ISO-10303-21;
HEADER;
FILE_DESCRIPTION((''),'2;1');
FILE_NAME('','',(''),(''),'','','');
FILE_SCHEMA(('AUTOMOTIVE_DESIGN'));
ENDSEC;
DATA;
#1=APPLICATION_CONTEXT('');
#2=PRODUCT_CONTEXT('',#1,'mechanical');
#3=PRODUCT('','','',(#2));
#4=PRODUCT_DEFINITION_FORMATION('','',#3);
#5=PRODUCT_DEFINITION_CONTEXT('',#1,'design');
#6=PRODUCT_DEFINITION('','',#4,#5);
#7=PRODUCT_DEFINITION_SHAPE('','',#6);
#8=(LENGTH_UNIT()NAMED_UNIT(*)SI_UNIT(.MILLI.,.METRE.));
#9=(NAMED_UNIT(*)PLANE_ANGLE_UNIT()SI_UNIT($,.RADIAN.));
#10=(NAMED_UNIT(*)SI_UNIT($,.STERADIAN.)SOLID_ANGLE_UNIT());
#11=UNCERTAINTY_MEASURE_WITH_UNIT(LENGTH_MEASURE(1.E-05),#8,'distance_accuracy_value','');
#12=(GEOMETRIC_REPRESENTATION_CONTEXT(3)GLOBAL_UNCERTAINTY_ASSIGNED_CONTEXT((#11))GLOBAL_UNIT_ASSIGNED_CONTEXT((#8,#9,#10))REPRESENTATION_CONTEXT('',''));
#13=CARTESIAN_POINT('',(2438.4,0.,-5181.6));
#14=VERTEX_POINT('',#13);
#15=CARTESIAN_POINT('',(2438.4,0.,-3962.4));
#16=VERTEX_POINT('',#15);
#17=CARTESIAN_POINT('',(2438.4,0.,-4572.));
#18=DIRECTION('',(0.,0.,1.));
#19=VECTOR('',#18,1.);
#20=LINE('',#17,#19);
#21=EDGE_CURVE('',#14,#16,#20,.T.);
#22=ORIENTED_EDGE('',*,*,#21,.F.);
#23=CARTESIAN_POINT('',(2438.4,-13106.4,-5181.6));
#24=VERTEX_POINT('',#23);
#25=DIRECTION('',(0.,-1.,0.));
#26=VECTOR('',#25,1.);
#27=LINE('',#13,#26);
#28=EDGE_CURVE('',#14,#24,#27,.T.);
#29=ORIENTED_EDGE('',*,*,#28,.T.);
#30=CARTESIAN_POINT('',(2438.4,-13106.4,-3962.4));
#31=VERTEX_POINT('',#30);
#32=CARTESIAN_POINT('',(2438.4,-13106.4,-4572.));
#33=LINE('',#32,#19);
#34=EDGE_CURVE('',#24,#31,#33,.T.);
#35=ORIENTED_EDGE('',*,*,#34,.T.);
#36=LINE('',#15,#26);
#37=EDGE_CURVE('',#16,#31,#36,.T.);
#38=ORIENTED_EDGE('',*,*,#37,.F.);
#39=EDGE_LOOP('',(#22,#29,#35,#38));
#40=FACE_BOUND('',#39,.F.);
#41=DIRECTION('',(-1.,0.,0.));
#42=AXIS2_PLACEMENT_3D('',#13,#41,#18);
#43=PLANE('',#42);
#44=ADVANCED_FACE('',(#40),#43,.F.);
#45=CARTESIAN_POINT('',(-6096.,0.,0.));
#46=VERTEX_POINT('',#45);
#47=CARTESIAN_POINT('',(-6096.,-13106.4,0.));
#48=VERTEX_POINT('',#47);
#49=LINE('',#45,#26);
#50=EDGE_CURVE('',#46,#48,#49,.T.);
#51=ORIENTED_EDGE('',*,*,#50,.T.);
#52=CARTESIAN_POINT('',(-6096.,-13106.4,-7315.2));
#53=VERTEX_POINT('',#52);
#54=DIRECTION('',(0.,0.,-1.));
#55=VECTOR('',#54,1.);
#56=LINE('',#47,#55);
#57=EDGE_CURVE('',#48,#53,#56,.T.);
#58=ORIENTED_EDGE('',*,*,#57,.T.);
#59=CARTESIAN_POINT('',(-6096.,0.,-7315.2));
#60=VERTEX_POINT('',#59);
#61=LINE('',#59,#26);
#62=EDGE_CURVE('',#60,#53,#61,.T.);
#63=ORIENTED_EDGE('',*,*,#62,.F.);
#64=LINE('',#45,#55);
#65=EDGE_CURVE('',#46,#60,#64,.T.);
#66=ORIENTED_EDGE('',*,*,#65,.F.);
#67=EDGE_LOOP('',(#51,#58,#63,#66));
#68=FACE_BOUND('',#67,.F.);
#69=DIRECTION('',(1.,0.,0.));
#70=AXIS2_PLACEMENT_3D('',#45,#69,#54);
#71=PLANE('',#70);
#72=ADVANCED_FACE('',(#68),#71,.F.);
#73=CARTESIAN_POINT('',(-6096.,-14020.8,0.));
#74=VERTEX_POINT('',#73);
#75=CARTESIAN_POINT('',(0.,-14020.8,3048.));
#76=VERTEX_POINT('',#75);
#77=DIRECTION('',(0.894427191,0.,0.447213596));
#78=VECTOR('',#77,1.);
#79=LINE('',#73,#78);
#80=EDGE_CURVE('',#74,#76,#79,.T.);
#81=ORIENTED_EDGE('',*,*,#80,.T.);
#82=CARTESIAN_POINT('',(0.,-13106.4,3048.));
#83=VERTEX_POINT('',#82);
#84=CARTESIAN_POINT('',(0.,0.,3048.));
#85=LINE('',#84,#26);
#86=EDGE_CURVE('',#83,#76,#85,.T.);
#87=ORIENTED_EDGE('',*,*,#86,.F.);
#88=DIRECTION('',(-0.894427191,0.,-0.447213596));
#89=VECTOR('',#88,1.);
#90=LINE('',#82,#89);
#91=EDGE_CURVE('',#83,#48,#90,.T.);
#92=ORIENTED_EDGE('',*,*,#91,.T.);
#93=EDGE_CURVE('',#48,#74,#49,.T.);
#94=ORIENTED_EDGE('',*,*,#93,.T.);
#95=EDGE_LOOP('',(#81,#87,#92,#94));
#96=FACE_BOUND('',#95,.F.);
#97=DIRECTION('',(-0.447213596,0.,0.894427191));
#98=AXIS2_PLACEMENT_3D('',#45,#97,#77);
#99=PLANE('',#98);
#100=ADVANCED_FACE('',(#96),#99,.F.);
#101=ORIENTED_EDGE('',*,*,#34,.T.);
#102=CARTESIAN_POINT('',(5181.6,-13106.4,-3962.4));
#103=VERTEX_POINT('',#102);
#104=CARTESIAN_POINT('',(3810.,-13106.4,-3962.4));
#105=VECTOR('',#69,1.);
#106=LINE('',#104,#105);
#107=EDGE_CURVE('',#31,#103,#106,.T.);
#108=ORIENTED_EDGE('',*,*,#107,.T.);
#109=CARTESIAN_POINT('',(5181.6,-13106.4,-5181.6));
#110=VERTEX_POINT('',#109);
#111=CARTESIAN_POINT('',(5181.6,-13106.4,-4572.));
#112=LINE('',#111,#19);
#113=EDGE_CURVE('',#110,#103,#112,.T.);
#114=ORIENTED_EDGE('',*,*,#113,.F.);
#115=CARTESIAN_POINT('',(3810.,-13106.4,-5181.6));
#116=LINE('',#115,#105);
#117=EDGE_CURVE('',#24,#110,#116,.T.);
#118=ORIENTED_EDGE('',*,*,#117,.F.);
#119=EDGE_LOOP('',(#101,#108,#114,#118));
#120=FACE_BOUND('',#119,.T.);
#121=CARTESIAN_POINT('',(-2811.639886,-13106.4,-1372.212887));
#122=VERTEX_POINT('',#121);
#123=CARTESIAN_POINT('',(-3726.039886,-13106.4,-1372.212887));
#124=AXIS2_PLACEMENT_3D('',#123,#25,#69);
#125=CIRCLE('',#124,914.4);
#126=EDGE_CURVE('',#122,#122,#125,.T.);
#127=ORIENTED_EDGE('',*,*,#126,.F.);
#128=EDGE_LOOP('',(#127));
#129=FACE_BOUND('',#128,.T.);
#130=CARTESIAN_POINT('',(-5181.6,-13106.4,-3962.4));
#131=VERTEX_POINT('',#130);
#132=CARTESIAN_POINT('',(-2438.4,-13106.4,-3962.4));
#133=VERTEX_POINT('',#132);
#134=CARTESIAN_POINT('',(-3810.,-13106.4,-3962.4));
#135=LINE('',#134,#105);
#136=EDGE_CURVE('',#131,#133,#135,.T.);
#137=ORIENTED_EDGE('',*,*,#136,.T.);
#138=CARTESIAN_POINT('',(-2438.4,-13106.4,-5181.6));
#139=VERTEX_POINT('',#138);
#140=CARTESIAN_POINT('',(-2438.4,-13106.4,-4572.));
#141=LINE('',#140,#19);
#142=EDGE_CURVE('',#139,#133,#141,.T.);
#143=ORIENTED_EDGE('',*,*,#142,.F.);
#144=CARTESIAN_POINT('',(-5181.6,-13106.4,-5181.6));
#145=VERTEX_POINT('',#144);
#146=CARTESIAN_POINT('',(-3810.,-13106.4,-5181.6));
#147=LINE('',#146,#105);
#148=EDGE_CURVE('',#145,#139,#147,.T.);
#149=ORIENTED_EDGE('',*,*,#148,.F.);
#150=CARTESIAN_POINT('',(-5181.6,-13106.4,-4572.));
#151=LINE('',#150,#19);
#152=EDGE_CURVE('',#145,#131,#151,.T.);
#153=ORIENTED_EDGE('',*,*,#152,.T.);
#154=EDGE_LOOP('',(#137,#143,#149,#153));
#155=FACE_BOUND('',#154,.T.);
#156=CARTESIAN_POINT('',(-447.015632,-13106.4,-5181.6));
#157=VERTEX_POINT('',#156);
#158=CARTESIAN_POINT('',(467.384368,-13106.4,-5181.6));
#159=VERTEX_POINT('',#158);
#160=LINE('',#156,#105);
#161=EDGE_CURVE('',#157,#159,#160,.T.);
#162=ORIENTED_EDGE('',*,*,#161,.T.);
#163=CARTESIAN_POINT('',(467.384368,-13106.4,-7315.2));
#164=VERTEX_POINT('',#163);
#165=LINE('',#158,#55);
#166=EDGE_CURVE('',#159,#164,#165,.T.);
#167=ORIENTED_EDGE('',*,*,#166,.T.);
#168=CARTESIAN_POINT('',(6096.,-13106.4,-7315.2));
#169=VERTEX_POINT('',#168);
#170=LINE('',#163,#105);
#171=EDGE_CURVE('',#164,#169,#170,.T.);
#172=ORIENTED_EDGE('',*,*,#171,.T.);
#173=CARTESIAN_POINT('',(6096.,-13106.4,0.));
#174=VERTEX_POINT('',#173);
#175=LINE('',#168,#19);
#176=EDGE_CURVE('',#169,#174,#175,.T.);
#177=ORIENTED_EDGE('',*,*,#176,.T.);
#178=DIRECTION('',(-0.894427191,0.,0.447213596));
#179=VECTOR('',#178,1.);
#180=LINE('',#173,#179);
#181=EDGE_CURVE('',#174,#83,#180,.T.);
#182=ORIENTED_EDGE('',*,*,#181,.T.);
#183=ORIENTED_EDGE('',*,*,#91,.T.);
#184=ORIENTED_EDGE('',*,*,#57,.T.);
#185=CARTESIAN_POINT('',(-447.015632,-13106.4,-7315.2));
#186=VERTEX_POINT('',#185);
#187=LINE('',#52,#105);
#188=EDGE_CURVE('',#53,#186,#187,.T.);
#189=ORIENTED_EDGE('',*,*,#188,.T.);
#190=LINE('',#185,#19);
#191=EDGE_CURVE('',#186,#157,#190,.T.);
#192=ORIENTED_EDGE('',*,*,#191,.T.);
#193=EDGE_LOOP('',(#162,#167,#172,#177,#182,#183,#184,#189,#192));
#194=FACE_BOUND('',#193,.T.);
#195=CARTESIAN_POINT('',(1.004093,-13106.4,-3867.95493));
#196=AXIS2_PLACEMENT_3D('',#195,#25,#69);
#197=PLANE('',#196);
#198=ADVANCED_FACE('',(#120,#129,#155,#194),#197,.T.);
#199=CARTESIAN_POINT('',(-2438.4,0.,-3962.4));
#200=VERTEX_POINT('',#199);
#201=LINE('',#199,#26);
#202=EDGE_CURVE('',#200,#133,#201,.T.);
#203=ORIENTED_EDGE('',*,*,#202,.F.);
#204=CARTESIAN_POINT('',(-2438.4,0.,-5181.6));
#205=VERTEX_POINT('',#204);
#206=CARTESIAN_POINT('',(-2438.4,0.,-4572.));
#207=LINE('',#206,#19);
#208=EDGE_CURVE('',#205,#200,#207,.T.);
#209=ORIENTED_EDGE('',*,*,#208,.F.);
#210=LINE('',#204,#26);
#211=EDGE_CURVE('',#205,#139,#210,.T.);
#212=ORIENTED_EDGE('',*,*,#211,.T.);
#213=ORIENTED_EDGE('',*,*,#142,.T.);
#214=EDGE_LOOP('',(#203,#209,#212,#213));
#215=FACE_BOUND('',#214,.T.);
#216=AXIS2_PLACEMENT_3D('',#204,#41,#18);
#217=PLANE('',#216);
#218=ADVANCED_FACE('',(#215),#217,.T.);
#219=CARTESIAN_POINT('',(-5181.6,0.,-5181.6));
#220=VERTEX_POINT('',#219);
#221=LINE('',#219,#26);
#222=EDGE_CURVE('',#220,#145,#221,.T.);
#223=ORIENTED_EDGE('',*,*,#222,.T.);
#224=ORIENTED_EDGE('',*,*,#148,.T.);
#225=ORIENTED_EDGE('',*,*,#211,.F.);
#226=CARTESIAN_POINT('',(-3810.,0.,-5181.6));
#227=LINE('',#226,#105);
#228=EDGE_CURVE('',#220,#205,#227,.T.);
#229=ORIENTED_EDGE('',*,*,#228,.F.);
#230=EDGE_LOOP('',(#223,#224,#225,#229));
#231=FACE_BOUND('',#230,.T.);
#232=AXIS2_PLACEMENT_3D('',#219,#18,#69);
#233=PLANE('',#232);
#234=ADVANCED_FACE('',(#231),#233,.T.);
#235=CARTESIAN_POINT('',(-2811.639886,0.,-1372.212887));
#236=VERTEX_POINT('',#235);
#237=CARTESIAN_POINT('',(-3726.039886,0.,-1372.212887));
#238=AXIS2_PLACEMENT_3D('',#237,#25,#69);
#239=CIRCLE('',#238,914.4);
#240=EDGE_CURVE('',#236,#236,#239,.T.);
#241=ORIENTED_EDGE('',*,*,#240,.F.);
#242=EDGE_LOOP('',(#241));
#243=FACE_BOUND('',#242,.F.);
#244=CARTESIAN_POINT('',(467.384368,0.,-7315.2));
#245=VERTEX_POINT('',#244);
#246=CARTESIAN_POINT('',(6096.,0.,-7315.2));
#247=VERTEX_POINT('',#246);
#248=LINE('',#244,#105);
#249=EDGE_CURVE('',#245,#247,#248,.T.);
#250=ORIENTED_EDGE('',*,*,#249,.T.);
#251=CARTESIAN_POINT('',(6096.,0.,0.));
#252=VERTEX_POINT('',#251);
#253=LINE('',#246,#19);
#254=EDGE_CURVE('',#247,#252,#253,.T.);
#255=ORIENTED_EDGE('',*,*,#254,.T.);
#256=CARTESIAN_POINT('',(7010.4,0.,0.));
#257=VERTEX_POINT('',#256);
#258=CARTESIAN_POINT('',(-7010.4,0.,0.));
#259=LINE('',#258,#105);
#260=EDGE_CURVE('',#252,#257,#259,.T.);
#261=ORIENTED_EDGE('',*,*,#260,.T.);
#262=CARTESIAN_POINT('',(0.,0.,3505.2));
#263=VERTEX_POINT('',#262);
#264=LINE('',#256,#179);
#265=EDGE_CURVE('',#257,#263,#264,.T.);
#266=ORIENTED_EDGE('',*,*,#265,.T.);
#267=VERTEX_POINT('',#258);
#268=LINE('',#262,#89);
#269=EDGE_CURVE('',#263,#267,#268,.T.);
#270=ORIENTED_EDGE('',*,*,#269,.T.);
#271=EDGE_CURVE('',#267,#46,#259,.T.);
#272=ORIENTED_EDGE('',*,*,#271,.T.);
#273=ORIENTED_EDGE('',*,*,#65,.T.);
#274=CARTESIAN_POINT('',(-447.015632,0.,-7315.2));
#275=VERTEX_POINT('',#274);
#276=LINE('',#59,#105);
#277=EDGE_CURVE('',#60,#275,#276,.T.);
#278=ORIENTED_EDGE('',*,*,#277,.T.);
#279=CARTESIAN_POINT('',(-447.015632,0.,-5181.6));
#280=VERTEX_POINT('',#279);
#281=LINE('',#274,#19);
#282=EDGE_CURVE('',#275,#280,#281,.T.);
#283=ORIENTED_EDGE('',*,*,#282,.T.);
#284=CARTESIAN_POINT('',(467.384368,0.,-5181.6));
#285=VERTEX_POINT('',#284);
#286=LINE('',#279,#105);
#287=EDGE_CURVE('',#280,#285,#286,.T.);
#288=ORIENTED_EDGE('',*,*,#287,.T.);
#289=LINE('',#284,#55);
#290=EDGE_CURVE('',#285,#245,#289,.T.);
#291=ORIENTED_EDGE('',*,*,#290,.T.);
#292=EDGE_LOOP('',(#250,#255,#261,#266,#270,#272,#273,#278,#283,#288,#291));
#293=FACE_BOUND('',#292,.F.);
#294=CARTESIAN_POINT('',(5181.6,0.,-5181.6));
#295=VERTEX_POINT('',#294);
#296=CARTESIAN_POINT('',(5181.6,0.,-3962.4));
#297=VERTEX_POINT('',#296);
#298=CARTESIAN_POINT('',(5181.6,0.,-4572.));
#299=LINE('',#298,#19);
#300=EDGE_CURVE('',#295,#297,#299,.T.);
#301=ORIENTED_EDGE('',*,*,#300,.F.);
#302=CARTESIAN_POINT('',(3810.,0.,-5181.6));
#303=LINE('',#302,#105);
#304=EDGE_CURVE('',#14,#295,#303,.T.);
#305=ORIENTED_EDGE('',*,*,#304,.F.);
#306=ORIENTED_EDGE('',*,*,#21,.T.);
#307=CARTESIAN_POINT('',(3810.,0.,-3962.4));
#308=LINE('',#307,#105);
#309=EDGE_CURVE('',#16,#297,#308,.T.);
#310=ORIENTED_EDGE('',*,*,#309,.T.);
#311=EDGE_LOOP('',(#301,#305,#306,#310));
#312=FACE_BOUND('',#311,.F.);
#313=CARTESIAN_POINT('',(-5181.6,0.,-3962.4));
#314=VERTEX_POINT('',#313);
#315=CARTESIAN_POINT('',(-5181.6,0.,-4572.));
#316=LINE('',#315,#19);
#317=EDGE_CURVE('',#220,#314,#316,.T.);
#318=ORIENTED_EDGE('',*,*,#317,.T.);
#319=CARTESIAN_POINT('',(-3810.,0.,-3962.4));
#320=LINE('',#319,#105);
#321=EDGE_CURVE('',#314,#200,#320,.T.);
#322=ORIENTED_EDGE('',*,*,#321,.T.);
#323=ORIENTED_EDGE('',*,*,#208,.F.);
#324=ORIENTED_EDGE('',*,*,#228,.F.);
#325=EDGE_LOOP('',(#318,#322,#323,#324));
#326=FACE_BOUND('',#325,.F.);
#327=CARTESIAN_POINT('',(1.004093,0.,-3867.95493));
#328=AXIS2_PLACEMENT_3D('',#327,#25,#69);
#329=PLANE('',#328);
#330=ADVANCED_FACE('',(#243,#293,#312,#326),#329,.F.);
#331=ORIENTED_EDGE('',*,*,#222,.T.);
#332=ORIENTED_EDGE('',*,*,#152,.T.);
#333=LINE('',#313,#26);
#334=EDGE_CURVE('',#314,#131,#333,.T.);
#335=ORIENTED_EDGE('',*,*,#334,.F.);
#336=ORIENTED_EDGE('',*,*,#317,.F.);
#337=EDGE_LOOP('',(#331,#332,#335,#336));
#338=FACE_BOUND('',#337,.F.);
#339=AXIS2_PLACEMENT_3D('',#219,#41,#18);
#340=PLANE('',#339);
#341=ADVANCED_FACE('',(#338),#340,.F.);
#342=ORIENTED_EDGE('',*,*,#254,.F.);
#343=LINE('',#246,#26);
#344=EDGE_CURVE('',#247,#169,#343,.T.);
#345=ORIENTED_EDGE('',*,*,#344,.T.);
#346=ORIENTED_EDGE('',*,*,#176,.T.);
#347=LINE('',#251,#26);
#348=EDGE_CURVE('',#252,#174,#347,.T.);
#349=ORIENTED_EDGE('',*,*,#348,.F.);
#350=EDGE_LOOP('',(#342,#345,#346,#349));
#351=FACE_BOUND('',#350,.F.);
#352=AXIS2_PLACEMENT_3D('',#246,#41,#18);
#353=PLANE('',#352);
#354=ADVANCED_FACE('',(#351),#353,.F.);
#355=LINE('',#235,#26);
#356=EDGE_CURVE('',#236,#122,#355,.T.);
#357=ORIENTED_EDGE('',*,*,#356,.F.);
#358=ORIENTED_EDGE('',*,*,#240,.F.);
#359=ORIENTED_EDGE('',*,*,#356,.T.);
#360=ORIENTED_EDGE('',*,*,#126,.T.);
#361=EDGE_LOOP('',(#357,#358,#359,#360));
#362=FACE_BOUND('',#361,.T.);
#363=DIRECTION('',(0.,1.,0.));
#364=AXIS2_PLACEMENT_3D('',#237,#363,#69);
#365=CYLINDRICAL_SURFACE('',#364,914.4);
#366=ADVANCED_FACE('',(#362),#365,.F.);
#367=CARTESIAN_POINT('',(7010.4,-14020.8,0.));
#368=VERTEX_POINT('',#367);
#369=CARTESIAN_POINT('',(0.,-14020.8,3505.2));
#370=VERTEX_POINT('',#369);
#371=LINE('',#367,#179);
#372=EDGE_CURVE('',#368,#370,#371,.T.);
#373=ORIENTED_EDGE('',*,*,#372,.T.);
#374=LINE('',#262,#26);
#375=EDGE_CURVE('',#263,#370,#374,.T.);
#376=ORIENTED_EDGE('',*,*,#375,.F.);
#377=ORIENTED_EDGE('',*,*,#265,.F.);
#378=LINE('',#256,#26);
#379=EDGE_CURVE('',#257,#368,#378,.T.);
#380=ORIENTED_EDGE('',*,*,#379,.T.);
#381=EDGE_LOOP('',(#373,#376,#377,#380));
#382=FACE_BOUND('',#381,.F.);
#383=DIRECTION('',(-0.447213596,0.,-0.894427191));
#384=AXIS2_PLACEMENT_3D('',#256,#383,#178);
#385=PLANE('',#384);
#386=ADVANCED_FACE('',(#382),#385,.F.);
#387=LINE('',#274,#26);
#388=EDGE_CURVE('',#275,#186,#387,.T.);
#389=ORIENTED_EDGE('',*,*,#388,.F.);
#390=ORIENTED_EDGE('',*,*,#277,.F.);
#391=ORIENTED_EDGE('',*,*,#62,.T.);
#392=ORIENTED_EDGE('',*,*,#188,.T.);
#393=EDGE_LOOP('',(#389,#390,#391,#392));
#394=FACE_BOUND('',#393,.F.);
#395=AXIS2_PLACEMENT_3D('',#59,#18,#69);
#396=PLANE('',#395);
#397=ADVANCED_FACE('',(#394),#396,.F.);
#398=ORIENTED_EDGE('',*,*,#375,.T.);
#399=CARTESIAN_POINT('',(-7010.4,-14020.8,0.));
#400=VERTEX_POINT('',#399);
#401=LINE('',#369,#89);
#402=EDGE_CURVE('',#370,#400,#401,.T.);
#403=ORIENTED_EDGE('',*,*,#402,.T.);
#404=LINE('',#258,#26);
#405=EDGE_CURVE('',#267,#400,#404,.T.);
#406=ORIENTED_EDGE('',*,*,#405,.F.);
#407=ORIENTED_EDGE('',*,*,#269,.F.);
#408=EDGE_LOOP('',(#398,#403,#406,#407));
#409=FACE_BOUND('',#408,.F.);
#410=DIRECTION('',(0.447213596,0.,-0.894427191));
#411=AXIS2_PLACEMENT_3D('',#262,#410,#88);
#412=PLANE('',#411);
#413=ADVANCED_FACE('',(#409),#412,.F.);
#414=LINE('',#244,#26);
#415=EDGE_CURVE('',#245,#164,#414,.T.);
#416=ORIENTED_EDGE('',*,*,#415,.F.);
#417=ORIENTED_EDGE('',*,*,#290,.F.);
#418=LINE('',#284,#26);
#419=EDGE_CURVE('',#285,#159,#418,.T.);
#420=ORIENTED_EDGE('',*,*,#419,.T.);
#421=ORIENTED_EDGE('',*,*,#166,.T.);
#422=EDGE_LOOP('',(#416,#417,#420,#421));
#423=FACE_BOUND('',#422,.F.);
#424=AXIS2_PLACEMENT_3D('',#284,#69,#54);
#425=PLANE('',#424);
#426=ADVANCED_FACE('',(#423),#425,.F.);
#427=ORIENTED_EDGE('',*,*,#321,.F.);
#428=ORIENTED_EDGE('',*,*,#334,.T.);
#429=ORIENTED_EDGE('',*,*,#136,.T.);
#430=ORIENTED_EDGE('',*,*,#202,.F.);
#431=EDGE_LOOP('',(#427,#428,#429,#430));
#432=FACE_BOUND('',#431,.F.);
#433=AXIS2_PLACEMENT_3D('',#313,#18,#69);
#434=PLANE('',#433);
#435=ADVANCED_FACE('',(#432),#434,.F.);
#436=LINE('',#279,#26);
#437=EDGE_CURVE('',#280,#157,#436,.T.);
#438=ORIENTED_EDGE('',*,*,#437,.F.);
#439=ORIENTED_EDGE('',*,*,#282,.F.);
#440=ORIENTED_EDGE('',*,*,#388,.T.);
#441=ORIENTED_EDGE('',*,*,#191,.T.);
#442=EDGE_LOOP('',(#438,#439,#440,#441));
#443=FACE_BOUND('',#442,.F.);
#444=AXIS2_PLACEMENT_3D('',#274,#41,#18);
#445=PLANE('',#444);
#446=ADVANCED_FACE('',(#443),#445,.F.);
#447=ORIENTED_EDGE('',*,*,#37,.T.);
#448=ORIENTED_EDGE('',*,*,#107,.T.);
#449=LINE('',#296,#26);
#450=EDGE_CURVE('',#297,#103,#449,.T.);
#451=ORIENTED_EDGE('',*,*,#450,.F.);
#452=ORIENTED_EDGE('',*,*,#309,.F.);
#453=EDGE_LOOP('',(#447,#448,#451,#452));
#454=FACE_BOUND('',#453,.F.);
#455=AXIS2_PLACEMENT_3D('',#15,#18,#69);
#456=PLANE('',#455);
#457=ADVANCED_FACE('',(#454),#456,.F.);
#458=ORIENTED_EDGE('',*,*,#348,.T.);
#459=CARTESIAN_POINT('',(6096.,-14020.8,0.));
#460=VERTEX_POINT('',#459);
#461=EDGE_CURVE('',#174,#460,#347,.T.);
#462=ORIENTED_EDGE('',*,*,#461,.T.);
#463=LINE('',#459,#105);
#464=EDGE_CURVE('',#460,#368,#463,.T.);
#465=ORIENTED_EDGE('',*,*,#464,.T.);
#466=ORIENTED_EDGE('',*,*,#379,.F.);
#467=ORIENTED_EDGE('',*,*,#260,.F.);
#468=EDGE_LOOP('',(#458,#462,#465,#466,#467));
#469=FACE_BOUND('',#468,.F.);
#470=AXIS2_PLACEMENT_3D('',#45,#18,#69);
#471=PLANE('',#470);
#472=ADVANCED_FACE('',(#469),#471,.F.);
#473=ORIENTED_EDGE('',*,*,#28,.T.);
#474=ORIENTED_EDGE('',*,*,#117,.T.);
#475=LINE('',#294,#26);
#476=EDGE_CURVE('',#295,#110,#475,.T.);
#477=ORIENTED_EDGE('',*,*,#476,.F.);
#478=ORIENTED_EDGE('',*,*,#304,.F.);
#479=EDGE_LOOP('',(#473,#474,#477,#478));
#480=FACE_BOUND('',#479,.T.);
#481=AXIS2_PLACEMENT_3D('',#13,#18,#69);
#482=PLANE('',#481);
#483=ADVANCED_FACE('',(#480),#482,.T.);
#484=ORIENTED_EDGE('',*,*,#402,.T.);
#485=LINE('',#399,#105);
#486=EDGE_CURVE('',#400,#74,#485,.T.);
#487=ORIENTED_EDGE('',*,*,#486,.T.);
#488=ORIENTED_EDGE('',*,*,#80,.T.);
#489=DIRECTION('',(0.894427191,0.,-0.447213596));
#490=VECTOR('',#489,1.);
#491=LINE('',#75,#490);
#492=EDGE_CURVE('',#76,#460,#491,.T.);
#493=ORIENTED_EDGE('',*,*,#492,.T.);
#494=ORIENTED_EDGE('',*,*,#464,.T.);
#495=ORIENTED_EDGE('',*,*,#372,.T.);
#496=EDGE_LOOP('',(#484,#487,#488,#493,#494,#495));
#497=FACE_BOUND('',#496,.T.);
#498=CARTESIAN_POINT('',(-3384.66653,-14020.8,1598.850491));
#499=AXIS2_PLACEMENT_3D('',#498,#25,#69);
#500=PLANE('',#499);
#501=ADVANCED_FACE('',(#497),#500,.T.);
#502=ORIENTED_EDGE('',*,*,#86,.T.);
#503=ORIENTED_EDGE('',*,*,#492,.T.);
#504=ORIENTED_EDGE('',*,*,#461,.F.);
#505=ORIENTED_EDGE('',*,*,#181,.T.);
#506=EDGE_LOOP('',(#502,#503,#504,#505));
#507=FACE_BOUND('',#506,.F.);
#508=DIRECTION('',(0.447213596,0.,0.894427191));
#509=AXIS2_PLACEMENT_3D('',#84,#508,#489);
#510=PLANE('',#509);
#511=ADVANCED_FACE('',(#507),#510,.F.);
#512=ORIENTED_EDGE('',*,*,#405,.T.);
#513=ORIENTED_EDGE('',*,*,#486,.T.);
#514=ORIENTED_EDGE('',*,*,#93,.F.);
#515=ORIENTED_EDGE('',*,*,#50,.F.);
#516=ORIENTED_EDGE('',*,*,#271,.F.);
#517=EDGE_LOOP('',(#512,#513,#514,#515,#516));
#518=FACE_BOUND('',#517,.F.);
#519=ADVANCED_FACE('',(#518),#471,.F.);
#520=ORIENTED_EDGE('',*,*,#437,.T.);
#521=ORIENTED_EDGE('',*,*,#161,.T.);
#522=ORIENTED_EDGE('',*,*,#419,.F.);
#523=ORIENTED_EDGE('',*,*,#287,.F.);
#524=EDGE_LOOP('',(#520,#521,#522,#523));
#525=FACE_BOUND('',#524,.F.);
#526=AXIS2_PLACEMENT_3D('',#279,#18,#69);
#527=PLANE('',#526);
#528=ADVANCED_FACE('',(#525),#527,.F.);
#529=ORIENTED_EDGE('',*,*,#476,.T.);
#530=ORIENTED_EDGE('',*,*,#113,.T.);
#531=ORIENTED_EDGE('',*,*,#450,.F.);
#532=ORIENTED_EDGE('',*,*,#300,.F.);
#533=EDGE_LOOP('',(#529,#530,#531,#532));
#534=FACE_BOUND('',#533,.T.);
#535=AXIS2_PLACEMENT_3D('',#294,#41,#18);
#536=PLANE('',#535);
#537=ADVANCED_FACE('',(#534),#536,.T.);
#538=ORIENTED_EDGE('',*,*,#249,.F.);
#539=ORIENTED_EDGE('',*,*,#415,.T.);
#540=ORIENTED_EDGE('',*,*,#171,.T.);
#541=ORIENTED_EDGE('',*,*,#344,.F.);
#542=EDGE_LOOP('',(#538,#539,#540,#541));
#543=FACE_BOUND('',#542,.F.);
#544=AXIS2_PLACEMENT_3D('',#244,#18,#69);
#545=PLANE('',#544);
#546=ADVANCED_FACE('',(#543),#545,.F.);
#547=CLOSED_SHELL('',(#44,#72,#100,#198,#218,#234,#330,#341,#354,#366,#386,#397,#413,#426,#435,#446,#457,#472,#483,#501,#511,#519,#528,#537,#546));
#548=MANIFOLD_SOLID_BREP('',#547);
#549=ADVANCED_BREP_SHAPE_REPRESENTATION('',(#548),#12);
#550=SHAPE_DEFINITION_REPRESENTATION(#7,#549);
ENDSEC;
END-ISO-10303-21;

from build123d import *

# Parameters (mm, degrees)
F1_DEPTH = 14020.8
F2_DEPTH = 13106.4
F0_W     = 2743.2
F0_H     = 1219.2
F0_R     = 914.4
F3_DEPTH = 13106.4


# Not quite as in the source:
# - the program builds the solid bodies; features that only make, move or delete a surface that nothing else refers to are left out


with BuildPart() as f1:
    # F0 (on Front) → F1 (new body)
    with BuildSketch(Plane.XZ):
        Polygon((-7010.4, 0), (-6096, 0), (0, 3048), (0, 3505.2), align=None)
        Polygon((0, 3048), (6096, 0), (7010.4, 0), (0, 3505.2), align=None)
    extrude(amount=F1_DEPTH)

    # F0 (on Front) → F2 (join)
    with BuildSketch(Plane.XZ):
        Polygon((-6096, 0), (0, 0), (6096, 0), (0, 3048), align=None)
    extrude(amount=F2_DEPTH)

    # F0 (on Front) → F3 (join)
    with BuildSketch(Plane.XZ):
        Polygon((6096, 0), (0, 0), (-6096, 0), (-6096, -7315.2), (-447.0156319439, -7315.2), (-447.0156319439, -5181.6), (467.3843680561, -5181.6), (467.3843680561, -7315.2), (6096, -7315.2), align=None)
        with Locations((-3810, -4572)):
            Rectangle(F0_W, F0_H, mode=Mode.SUBTRACT)
        with Locations((3810, -4572)):
            Rectangle(F0_W, F0_H, mode=Mode.SUBTRACT)
        with Locations((-3726.0398864746, -1372.2128868103)):
            Circle(F0_R, mode=Mode.SUBTRACT)
    extrude(amount=F3_DEPTH)


solid = f1.part
